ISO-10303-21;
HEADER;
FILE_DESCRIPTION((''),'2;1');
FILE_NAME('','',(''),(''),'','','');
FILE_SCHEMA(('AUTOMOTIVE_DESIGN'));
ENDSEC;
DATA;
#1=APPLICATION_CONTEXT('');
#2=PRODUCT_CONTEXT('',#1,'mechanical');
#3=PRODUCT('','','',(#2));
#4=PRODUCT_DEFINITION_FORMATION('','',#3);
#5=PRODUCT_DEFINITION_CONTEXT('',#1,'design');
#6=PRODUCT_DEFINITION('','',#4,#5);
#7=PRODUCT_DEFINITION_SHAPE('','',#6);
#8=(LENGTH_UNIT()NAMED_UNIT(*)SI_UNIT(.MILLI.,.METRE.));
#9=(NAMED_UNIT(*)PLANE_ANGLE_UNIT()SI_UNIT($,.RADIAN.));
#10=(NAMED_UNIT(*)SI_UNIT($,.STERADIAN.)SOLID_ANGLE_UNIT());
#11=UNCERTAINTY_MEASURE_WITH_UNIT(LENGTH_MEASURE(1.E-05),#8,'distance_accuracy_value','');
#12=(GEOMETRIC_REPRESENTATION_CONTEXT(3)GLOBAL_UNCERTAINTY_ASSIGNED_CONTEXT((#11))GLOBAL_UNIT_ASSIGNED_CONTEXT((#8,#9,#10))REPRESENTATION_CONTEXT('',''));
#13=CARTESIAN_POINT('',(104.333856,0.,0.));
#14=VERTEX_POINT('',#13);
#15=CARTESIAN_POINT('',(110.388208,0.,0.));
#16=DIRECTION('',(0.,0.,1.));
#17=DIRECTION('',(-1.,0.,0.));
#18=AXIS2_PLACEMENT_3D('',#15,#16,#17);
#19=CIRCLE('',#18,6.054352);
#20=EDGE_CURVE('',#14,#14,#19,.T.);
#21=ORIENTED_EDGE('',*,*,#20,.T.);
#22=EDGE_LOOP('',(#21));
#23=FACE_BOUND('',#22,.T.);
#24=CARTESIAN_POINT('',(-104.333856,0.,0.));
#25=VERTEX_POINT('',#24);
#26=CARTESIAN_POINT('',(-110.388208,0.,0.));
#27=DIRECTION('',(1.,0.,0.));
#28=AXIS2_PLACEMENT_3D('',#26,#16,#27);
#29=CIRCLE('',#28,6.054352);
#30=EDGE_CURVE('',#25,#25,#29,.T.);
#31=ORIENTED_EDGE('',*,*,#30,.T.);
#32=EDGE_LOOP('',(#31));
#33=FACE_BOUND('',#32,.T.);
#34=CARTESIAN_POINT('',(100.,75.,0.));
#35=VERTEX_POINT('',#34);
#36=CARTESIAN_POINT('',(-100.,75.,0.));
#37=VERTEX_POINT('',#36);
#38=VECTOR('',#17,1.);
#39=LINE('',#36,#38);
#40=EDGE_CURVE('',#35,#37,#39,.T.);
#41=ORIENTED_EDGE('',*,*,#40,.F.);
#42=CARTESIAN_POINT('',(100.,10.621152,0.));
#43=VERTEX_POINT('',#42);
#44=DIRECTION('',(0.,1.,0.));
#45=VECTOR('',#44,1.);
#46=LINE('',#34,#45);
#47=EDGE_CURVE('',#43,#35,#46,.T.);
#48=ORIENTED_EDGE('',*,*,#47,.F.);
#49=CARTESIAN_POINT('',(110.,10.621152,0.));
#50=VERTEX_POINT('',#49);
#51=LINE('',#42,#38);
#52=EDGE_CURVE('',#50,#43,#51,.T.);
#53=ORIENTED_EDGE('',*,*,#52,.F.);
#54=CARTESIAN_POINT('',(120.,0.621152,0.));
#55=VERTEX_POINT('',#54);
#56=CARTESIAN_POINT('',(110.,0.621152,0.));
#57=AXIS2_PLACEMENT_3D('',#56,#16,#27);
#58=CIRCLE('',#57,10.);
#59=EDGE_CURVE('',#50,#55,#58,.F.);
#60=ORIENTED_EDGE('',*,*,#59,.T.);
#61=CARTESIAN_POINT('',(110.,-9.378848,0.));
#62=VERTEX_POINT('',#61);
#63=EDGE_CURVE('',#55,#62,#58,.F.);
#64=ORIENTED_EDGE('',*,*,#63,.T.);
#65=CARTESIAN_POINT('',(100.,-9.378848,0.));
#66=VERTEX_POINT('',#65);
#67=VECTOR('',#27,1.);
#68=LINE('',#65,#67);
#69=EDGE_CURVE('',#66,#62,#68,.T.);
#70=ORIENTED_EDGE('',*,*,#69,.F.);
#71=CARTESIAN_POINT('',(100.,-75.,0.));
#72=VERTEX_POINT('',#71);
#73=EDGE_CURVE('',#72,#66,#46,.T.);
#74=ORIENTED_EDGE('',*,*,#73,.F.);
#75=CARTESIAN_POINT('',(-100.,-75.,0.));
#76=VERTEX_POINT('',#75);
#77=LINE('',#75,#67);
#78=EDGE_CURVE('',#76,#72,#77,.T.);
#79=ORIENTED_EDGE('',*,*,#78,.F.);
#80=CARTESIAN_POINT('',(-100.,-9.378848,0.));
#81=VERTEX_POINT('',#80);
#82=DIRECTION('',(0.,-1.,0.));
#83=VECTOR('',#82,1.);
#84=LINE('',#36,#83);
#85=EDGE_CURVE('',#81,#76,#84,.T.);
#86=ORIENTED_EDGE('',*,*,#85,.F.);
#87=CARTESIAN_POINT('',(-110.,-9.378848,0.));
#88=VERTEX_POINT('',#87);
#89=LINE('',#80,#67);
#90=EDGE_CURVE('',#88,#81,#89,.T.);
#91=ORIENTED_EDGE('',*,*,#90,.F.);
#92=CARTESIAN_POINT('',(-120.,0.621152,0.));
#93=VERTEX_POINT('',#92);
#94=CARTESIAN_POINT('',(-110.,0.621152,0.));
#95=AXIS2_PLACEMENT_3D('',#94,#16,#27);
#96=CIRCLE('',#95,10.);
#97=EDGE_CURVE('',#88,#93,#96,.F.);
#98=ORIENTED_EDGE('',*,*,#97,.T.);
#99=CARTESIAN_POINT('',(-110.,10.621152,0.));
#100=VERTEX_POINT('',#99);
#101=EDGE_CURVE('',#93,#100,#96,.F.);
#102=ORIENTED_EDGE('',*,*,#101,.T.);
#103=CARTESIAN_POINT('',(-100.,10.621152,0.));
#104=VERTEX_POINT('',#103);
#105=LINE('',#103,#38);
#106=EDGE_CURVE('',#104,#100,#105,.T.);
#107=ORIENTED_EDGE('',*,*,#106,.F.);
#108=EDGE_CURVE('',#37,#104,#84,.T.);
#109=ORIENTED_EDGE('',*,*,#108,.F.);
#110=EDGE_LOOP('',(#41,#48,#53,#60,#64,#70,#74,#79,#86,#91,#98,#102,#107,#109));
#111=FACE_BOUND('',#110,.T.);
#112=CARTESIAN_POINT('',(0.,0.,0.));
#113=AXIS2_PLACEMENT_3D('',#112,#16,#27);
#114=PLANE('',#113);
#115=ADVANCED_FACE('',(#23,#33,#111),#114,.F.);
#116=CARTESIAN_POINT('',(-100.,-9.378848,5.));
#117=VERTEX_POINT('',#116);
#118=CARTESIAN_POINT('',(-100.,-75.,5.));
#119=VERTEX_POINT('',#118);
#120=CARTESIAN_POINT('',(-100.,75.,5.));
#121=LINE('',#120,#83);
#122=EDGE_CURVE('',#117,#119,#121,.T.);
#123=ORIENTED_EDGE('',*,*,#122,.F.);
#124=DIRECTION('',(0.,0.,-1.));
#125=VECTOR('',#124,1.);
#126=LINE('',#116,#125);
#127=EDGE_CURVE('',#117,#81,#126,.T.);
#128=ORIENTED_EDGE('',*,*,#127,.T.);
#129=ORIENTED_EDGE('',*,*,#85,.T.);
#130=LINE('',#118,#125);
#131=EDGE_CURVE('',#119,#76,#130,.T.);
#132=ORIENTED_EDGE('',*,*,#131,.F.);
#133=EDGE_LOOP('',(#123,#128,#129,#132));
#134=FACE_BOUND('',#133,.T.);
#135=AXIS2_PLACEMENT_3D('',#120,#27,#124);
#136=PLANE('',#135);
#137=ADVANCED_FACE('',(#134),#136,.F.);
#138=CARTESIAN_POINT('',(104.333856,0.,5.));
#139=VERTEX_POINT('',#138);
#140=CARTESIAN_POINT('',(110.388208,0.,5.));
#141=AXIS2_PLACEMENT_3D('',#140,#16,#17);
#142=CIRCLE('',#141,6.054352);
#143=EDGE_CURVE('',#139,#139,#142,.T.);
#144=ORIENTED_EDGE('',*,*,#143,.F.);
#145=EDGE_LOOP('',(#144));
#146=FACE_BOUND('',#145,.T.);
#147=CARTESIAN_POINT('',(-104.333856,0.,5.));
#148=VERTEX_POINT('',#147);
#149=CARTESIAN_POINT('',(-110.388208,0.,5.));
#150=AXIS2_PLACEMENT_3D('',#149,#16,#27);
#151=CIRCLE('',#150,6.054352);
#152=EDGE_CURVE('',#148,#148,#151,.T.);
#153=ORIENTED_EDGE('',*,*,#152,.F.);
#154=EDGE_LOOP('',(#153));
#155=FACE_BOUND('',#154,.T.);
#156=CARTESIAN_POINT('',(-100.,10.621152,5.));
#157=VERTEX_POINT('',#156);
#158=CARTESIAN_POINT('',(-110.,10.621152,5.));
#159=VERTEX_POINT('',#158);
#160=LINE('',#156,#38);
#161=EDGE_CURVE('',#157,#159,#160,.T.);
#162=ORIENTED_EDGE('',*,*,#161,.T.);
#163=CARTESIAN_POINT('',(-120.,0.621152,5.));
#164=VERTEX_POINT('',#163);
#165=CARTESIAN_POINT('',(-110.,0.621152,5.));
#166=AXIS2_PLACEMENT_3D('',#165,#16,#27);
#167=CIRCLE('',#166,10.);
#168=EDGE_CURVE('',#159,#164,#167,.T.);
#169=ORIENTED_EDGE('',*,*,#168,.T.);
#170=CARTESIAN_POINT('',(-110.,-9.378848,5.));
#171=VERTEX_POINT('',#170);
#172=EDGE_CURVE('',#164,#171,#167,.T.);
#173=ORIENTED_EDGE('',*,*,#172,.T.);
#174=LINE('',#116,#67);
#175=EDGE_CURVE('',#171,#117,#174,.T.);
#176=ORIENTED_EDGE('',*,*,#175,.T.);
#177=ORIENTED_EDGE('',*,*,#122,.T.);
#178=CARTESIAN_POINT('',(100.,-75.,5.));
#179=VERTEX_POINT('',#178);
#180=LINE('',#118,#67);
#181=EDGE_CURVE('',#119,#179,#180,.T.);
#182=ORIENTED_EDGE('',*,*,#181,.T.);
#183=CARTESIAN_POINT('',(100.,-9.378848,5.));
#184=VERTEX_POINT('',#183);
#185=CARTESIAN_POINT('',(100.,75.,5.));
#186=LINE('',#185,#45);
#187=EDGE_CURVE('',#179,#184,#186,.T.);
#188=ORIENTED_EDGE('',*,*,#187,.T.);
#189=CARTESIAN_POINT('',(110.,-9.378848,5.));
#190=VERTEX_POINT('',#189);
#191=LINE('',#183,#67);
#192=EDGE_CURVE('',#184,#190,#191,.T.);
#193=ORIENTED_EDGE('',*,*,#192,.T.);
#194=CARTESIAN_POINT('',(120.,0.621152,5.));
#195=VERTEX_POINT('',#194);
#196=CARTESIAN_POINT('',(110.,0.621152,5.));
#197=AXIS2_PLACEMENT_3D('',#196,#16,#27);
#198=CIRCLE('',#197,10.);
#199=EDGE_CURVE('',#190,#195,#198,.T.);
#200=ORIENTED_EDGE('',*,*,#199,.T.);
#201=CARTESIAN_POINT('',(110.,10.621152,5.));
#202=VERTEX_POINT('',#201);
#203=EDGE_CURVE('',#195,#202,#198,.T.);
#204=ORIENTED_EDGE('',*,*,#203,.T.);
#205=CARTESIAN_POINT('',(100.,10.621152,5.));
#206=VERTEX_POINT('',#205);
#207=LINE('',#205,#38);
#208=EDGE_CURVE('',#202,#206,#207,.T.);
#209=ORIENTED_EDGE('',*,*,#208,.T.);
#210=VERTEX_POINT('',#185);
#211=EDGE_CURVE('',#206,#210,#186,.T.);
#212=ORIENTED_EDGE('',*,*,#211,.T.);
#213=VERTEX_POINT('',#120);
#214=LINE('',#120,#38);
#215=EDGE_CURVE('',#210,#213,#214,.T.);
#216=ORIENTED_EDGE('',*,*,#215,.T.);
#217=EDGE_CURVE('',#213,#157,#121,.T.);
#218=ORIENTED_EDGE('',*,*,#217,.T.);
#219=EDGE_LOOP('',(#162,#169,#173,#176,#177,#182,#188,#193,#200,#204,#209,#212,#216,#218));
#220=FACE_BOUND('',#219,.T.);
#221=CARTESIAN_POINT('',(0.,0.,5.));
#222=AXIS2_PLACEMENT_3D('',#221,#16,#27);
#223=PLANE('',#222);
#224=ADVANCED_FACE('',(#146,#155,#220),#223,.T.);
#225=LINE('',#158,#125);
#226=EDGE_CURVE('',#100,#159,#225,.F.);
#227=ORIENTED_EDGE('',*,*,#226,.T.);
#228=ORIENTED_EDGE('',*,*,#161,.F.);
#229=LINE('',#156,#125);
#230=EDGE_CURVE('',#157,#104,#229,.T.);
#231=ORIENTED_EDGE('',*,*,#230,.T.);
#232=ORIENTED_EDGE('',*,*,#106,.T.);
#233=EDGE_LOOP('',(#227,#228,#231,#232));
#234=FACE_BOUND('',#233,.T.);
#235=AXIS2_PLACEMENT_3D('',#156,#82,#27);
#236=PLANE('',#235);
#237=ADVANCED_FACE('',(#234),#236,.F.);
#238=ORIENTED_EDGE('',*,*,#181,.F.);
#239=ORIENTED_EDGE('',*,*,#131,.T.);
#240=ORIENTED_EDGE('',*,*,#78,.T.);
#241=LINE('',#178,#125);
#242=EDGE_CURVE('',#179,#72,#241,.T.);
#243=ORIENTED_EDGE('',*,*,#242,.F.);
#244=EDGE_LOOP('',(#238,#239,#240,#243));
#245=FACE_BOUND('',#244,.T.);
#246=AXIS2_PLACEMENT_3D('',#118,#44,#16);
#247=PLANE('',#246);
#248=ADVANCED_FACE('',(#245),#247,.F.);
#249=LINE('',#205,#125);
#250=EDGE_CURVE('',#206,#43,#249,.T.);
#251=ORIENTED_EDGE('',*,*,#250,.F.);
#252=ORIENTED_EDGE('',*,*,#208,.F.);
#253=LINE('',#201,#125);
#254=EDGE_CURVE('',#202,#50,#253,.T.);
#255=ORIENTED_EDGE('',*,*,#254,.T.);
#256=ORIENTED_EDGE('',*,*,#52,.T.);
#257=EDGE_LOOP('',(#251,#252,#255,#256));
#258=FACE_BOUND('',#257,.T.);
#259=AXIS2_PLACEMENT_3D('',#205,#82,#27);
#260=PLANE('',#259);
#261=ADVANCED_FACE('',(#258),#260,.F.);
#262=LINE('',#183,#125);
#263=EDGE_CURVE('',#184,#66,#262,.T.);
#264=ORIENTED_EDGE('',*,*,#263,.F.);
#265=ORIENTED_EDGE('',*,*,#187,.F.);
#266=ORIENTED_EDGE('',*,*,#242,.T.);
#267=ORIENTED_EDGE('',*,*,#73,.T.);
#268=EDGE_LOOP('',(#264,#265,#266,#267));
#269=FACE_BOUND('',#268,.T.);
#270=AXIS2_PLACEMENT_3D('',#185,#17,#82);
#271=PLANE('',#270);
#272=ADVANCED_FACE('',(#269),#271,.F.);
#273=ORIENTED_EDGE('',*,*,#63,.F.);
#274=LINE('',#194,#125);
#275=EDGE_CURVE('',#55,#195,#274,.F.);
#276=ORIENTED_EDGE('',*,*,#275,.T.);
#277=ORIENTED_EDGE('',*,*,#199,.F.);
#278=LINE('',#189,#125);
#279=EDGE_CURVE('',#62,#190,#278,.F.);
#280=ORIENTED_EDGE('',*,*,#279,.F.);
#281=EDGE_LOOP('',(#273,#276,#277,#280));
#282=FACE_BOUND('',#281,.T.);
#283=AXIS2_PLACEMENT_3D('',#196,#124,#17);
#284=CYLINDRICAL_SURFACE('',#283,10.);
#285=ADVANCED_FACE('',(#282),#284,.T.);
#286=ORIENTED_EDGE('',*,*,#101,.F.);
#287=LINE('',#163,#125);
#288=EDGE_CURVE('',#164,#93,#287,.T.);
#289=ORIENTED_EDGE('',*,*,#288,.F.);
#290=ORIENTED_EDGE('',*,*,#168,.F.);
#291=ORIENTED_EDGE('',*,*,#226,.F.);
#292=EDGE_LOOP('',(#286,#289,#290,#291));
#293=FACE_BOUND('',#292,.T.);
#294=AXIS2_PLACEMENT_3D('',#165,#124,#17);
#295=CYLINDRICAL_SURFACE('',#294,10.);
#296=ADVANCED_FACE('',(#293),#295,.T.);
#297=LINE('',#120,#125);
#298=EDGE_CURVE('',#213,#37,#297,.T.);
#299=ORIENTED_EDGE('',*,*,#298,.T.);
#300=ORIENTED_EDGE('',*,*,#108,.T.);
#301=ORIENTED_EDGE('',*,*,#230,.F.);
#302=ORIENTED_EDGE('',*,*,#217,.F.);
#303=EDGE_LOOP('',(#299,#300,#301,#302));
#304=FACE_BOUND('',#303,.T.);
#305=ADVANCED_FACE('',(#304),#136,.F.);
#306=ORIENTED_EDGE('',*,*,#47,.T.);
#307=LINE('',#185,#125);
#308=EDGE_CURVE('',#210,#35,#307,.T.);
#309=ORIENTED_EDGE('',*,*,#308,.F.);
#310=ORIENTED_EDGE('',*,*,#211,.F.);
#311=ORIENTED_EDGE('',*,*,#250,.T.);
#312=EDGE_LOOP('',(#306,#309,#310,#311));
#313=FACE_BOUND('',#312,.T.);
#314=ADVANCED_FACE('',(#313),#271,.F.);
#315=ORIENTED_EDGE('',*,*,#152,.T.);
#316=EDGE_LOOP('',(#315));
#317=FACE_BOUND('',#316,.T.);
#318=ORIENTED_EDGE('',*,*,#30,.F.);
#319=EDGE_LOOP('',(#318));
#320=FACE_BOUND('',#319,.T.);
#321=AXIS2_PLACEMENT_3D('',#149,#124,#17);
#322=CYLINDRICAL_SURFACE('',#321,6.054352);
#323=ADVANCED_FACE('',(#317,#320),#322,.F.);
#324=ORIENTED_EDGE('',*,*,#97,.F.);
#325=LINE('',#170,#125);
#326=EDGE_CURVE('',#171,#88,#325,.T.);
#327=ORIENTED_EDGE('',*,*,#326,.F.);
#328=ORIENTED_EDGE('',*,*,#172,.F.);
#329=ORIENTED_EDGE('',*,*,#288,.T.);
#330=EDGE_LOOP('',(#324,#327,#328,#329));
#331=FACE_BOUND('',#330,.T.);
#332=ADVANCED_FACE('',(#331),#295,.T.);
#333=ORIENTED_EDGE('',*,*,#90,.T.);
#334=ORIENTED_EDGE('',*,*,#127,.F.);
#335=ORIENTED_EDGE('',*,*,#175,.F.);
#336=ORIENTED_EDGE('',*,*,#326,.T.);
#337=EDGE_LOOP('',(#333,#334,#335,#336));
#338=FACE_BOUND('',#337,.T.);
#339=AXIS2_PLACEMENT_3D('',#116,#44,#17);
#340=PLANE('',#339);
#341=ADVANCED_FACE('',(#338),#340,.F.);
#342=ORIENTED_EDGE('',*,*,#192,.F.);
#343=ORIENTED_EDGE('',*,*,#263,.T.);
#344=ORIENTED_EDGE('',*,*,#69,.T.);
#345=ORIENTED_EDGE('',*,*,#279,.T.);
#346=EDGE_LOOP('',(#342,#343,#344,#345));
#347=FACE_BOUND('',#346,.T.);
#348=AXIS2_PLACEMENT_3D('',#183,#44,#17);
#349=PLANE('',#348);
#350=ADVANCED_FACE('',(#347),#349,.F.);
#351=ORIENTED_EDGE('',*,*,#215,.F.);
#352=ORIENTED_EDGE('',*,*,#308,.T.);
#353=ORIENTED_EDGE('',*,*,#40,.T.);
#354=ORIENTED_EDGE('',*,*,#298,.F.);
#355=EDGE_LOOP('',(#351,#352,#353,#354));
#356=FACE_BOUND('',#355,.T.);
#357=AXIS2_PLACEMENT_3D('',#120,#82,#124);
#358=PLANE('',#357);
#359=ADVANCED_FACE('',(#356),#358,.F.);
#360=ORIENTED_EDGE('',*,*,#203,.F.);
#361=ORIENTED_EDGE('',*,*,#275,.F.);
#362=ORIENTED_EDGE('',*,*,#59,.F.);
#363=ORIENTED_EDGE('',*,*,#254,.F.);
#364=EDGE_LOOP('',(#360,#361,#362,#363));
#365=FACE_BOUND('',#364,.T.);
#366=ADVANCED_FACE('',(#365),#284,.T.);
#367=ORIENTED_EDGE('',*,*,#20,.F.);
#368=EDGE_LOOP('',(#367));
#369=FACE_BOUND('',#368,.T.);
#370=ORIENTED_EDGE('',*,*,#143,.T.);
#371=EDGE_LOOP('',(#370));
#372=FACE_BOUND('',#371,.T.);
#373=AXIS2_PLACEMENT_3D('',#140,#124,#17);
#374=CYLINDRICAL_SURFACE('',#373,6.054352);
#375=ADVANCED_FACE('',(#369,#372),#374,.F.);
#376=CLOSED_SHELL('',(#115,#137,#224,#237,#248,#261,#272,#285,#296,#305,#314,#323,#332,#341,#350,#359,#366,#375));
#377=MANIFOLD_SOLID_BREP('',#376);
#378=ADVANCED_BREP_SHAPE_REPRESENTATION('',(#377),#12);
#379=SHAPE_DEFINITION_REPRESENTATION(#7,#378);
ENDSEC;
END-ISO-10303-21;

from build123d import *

# Parameters (mm, degrees)
SKETCH_1_W      = 200
SKETCH_1_H      = 150
EXTRUDE_1_DEPTH = 5
SKETCH_2_W      = 20
SKETCH_2_H      = 20
SKETCH_2_R      = 6.054352045
EXTRUDE_2_DEPTH = 5
FILLET_1_R      = 10


with BuildPart() as part:
    # 草图1 → 凸台-拉伸1 (new body)
    with BuildSketch(Plane.XY):
        Rectangle(SKETCH_1_W, SKETCH_1_H)
    extrude(amount=EXTRUDE_1_DEPTH)

    # 草图2 → 凸台-拉伸2 (add)
    # profile 1 of 2: a face of its own
    with BuildSketch(Plane.XY):
        with Locations((-110, 0.621152281)):
            Rectangle(SKETCH_2_W, SKETCH_2_H)
        with Locations((-110.38820767, 0)):
            Circle(SKETCH_2_R, mode=Mode.SUBTRACT)
    # profile 2 of 2: a face of its own
    with BuildSketch(Plane.XY):
        with Locations((110, 0.621152281)):
            Rectangle(SKETCH_2_W, SKETCH_2_H)
        with Locations(Location((110.38820767, 0, 0), (0, 0, 180))):
            Circle(SKETCH_2_R, mode=Mode.SUBTRACT)
    extrude(amount=EXTRUDE_2_DEPTH)

    # 圆角1
    fillet_1_edges = [part.edges().sort_by_distance(p)[0] for p in [
        (120, -9.378847719, 2.5),
        (120, 10.621152281, 2.5),
        (-120, -9.378847719, 2.5),
        (-120, 10.621152281, 2.5),
    ]]
    fillet(fillet_1_edges, radius=FILLET_1_R - 0.0001)  # a hair under: the kernel refuses the full size


solid = part.part
